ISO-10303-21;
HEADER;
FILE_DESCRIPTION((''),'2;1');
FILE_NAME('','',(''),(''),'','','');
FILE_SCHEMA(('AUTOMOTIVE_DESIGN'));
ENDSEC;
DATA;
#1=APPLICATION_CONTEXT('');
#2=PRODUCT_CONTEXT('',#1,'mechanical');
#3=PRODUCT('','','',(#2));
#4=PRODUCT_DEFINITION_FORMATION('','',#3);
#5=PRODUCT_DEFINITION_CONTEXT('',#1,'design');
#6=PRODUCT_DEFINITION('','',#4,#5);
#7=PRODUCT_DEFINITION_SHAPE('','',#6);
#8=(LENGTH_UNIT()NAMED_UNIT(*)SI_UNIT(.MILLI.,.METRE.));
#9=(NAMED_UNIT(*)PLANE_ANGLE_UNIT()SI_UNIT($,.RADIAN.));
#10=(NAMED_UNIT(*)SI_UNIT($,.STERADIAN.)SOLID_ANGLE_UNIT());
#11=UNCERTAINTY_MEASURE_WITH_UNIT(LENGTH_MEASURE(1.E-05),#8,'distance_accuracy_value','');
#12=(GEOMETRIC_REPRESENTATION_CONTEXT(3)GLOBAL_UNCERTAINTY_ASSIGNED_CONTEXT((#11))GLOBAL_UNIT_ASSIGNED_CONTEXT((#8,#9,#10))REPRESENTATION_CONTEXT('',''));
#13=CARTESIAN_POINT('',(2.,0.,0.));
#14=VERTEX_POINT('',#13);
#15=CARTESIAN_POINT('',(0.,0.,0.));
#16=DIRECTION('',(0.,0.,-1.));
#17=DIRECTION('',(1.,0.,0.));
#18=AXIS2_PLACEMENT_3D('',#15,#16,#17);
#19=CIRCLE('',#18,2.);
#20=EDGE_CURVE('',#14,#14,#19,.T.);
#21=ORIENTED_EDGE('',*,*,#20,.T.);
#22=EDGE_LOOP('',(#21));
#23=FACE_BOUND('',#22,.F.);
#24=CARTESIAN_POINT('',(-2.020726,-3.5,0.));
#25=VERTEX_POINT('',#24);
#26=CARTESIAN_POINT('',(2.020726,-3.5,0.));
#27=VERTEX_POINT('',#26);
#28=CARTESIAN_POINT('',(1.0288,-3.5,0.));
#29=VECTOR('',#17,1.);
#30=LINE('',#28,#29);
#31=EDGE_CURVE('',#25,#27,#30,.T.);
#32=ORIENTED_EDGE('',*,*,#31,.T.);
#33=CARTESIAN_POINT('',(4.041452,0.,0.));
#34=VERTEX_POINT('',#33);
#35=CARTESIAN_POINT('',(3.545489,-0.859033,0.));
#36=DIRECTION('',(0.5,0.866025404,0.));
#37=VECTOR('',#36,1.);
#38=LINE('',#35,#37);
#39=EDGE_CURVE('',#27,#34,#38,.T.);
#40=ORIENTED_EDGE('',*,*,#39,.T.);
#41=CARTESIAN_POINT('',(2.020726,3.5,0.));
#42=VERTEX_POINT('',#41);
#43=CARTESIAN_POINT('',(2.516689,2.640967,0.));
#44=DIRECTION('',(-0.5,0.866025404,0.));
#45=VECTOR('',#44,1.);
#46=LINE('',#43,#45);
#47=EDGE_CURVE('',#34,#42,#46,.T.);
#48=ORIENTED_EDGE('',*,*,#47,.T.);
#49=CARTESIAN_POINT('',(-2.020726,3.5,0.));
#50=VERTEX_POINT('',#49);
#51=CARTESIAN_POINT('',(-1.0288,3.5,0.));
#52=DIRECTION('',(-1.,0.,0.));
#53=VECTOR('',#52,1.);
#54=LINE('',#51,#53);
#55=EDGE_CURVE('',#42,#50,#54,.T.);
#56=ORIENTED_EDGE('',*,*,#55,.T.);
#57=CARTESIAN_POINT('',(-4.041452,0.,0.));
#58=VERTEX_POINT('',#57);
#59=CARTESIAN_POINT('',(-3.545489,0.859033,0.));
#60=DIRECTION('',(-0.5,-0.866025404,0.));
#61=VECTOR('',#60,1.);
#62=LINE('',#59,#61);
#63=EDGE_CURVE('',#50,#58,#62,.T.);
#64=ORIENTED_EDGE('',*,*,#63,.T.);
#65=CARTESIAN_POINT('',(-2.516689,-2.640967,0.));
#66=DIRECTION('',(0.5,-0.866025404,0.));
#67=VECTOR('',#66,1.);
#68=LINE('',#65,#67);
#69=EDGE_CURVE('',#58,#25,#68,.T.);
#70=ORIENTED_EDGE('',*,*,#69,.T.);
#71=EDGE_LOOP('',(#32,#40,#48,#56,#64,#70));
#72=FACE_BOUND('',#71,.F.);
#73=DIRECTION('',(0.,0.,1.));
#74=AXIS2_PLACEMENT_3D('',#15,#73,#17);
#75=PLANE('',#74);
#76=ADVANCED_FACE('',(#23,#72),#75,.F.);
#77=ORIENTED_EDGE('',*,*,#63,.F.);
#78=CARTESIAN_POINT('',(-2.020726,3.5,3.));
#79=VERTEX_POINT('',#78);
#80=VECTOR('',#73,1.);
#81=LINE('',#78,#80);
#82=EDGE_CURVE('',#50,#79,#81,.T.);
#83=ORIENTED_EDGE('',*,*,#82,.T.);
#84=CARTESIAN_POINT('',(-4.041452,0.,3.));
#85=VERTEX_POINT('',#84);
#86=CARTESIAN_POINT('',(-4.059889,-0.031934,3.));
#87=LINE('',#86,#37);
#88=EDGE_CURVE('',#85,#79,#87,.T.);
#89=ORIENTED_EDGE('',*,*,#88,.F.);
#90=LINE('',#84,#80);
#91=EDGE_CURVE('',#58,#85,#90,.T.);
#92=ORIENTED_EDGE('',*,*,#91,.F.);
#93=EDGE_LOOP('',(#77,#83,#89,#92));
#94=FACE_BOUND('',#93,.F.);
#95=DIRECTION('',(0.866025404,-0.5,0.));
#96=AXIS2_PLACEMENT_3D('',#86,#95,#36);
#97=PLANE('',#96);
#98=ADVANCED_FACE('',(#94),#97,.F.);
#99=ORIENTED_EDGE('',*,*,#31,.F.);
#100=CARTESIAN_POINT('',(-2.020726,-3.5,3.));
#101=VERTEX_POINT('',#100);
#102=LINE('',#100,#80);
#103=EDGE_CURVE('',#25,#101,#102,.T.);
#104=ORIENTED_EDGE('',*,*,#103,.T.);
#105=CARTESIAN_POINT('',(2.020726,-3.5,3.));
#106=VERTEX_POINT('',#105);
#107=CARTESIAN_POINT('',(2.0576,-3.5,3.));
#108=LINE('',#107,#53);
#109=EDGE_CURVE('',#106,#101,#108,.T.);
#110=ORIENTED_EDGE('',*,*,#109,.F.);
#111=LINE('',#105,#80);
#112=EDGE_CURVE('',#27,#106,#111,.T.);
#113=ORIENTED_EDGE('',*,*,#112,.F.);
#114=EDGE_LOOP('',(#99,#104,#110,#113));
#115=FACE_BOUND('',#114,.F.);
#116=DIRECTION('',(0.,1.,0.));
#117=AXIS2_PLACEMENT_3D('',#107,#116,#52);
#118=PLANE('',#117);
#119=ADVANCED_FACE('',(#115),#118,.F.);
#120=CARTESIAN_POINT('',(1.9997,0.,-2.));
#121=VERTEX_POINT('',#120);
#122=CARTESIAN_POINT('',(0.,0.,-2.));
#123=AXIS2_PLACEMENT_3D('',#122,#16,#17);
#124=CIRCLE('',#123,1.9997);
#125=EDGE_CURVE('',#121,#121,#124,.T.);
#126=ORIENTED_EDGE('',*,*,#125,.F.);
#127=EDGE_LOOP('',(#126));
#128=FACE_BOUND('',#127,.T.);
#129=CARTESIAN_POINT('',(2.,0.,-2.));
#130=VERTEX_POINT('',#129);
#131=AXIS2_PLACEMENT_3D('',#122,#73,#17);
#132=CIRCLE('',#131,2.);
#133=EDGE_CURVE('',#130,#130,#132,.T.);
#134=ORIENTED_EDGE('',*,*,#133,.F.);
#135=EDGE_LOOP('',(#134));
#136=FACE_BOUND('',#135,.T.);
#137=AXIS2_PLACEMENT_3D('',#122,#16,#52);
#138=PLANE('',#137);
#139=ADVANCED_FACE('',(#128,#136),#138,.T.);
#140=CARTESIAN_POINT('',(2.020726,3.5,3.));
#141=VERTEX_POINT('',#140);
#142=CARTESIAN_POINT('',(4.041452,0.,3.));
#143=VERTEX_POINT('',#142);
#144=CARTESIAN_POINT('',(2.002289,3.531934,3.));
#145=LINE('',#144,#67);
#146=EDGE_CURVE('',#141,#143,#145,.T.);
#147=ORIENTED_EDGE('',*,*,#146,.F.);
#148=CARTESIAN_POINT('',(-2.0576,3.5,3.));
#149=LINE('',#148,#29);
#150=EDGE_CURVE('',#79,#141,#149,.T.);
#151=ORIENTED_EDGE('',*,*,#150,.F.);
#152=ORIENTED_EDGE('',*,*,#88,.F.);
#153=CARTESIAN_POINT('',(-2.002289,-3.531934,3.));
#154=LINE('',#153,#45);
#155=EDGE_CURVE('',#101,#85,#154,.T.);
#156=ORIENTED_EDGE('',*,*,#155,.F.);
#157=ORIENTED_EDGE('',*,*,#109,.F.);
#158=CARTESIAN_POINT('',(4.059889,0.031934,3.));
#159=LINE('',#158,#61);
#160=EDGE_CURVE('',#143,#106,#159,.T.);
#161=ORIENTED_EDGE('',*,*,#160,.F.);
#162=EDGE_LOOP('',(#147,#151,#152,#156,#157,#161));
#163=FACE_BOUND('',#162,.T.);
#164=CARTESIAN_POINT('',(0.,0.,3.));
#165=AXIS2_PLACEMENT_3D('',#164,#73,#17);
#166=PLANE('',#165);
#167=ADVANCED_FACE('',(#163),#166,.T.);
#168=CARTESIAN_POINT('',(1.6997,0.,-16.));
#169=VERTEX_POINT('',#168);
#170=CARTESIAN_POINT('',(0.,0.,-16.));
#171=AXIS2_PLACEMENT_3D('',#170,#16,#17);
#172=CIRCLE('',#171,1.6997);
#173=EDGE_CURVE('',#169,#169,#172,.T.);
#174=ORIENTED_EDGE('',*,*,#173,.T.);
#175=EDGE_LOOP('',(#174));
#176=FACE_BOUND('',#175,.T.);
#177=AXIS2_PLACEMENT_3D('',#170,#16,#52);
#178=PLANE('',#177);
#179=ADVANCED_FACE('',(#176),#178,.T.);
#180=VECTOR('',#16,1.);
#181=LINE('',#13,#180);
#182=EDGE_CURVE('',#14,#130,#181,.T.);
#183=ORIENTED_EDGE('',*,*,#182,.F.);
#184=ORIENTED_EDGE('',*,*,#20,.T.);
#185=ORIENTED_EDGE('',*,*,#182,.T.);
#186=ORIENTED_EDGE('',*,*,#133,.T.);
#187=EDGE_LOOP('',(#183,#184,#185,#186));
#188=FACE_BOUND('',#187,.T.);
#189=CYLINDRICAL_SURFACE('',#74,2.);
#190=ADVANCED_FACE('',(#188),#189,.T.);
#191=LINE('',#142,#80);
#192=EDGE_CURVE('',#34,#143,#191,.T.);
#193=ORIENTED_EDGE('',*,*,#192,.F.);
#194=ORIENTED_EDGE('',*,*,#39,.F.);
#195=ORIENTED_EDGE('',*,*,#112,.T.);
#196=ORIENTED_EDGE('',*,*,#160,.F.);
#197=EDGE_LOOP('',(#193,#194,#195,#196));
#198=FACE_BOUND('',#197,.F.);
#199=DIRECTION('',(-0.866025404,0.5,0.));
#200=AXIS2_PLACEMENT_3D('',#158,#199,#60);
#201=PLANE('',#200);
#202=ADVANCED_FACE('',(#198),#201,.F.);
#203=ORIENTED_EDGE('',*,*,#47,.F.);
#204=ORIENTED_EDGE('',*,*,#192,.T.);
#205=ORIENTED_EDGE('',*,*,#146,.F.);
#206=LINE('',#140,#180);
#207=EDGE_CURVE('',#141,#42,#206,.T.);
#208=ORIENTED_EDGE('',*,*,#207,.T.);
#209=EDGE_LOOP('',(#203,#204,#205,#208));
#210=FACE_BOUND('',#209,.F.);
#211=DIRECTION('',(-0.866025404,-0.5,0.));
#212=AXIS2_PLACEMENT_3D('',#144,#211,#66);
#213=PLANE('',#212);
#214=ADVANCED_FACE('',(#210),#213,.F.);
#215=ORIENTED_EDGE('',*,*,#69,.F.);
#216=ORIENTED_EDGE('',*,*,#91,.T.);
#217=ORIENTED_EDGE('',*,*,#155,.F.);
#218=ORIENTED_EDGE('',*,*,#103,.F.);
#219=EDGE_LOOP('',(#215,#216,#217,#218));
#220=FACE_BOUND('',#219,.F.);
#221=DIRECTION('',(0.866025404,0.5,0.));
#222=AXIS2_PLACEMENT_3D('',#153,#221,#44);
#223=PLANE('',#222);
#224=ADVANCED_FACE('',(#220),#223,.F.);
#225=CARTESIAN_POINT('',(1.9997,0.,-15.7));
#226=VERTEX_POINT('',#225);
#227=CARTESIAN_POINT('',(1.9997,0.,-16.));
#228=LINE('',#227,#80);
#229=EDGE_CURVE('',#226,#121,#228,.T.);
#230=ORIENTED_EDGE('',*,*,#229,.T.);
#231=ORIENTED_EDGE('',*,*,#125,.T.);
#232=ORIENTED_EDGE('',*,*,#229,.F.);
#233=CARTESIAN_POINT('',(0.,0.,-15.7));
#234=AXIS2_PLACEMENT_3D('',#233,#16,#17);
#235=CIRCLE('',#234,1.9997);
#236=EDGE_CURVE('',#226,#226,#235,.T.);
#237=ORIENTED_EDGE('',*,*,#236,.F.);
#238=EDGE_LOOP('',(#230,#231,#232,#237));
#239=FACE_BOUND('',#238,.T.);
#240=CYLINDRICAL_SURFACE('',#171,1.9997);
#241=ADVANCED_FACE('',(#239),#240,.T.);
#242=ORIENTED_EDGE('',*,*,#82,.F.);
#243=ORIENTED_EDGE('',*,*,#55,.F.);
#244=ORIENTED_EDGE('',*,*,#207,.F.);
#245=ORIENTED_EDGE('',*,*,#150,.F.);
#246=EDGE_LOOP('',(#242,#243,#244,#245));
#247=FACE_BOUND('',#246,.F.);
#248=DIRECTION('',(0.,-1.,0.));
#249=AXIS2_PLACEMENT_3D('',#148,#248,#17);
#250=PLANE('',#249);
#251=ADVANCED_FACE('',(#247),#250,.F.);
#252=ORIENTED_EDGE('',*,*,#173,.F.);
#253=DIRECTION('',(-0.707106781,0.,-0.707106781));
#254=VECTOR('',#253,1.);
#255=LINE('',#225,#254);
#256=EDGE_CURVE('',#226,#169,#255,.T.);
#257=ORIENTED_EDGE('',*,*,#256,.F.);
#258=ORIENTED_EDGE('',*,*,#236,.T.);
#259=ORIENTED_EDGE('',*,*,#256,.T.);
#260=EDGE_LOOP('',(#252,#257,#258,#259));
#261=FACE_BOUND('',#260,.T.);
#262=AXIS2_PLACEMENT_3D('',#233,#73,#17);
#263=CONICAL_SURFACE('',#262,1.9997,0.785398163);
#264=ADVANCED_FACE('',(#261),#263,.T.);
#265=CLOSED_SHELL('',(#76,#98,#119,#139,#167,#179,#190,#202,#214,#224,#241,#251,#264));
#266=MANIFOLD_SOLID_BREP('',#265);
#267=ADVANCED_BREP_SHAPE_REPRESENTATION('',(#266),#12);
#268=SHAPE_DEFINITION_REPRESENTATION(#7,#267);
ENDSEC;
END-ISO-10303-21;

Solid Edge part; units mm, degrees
sketch "Sketch1" plane through (0, 0, 0) normal (0, 0, 1) x (1, 0, 0)
  circle A0 centre (0, 0) radius 4.06
  dimension "D1" = 8.12
extrude "Protrusion1" add sketch "Sketch1" along normal blind 3
sketch "Sketch2" plane through (0, 0, 0) normal (0, 0, -1) x (1, 0, 0)
  circle A0 centre (0, 0) radius 2
extrude "Protrusion2" add sketch "Sketch2" along normal blind 16
sketch "Sketch3" plane through (0, 0, -16) normal (0, 0, -1) x (1, 0, 0)
  circle A0 centre (0, 0) radius 1.9997
extrude "Cutout1" cut sketch "Sketch3" against normal blind 14 flip side to cut
chamfer "Chamfer_1" distance 0.3 angle 45 1 edges at (-1.9997, 0, -16)
sketch "Sketch4" plane through (0, 0, 3) normal (0, 0, 1) x (1, 0, 0)
  line L0 (-2.0576, 3.5) -> (2.0576, 3.5)
  dimension "D1" = 7
extrude "Cutout2" cut sketch "Sketch4" against normal up to next material side at (0, 3.55, 3)
pattern_circular "Pattern1" count 6 over 360 about axis through (0, 0, 3) along (0, 0, 1) of "Cutout2"
properties part number "24101186"
